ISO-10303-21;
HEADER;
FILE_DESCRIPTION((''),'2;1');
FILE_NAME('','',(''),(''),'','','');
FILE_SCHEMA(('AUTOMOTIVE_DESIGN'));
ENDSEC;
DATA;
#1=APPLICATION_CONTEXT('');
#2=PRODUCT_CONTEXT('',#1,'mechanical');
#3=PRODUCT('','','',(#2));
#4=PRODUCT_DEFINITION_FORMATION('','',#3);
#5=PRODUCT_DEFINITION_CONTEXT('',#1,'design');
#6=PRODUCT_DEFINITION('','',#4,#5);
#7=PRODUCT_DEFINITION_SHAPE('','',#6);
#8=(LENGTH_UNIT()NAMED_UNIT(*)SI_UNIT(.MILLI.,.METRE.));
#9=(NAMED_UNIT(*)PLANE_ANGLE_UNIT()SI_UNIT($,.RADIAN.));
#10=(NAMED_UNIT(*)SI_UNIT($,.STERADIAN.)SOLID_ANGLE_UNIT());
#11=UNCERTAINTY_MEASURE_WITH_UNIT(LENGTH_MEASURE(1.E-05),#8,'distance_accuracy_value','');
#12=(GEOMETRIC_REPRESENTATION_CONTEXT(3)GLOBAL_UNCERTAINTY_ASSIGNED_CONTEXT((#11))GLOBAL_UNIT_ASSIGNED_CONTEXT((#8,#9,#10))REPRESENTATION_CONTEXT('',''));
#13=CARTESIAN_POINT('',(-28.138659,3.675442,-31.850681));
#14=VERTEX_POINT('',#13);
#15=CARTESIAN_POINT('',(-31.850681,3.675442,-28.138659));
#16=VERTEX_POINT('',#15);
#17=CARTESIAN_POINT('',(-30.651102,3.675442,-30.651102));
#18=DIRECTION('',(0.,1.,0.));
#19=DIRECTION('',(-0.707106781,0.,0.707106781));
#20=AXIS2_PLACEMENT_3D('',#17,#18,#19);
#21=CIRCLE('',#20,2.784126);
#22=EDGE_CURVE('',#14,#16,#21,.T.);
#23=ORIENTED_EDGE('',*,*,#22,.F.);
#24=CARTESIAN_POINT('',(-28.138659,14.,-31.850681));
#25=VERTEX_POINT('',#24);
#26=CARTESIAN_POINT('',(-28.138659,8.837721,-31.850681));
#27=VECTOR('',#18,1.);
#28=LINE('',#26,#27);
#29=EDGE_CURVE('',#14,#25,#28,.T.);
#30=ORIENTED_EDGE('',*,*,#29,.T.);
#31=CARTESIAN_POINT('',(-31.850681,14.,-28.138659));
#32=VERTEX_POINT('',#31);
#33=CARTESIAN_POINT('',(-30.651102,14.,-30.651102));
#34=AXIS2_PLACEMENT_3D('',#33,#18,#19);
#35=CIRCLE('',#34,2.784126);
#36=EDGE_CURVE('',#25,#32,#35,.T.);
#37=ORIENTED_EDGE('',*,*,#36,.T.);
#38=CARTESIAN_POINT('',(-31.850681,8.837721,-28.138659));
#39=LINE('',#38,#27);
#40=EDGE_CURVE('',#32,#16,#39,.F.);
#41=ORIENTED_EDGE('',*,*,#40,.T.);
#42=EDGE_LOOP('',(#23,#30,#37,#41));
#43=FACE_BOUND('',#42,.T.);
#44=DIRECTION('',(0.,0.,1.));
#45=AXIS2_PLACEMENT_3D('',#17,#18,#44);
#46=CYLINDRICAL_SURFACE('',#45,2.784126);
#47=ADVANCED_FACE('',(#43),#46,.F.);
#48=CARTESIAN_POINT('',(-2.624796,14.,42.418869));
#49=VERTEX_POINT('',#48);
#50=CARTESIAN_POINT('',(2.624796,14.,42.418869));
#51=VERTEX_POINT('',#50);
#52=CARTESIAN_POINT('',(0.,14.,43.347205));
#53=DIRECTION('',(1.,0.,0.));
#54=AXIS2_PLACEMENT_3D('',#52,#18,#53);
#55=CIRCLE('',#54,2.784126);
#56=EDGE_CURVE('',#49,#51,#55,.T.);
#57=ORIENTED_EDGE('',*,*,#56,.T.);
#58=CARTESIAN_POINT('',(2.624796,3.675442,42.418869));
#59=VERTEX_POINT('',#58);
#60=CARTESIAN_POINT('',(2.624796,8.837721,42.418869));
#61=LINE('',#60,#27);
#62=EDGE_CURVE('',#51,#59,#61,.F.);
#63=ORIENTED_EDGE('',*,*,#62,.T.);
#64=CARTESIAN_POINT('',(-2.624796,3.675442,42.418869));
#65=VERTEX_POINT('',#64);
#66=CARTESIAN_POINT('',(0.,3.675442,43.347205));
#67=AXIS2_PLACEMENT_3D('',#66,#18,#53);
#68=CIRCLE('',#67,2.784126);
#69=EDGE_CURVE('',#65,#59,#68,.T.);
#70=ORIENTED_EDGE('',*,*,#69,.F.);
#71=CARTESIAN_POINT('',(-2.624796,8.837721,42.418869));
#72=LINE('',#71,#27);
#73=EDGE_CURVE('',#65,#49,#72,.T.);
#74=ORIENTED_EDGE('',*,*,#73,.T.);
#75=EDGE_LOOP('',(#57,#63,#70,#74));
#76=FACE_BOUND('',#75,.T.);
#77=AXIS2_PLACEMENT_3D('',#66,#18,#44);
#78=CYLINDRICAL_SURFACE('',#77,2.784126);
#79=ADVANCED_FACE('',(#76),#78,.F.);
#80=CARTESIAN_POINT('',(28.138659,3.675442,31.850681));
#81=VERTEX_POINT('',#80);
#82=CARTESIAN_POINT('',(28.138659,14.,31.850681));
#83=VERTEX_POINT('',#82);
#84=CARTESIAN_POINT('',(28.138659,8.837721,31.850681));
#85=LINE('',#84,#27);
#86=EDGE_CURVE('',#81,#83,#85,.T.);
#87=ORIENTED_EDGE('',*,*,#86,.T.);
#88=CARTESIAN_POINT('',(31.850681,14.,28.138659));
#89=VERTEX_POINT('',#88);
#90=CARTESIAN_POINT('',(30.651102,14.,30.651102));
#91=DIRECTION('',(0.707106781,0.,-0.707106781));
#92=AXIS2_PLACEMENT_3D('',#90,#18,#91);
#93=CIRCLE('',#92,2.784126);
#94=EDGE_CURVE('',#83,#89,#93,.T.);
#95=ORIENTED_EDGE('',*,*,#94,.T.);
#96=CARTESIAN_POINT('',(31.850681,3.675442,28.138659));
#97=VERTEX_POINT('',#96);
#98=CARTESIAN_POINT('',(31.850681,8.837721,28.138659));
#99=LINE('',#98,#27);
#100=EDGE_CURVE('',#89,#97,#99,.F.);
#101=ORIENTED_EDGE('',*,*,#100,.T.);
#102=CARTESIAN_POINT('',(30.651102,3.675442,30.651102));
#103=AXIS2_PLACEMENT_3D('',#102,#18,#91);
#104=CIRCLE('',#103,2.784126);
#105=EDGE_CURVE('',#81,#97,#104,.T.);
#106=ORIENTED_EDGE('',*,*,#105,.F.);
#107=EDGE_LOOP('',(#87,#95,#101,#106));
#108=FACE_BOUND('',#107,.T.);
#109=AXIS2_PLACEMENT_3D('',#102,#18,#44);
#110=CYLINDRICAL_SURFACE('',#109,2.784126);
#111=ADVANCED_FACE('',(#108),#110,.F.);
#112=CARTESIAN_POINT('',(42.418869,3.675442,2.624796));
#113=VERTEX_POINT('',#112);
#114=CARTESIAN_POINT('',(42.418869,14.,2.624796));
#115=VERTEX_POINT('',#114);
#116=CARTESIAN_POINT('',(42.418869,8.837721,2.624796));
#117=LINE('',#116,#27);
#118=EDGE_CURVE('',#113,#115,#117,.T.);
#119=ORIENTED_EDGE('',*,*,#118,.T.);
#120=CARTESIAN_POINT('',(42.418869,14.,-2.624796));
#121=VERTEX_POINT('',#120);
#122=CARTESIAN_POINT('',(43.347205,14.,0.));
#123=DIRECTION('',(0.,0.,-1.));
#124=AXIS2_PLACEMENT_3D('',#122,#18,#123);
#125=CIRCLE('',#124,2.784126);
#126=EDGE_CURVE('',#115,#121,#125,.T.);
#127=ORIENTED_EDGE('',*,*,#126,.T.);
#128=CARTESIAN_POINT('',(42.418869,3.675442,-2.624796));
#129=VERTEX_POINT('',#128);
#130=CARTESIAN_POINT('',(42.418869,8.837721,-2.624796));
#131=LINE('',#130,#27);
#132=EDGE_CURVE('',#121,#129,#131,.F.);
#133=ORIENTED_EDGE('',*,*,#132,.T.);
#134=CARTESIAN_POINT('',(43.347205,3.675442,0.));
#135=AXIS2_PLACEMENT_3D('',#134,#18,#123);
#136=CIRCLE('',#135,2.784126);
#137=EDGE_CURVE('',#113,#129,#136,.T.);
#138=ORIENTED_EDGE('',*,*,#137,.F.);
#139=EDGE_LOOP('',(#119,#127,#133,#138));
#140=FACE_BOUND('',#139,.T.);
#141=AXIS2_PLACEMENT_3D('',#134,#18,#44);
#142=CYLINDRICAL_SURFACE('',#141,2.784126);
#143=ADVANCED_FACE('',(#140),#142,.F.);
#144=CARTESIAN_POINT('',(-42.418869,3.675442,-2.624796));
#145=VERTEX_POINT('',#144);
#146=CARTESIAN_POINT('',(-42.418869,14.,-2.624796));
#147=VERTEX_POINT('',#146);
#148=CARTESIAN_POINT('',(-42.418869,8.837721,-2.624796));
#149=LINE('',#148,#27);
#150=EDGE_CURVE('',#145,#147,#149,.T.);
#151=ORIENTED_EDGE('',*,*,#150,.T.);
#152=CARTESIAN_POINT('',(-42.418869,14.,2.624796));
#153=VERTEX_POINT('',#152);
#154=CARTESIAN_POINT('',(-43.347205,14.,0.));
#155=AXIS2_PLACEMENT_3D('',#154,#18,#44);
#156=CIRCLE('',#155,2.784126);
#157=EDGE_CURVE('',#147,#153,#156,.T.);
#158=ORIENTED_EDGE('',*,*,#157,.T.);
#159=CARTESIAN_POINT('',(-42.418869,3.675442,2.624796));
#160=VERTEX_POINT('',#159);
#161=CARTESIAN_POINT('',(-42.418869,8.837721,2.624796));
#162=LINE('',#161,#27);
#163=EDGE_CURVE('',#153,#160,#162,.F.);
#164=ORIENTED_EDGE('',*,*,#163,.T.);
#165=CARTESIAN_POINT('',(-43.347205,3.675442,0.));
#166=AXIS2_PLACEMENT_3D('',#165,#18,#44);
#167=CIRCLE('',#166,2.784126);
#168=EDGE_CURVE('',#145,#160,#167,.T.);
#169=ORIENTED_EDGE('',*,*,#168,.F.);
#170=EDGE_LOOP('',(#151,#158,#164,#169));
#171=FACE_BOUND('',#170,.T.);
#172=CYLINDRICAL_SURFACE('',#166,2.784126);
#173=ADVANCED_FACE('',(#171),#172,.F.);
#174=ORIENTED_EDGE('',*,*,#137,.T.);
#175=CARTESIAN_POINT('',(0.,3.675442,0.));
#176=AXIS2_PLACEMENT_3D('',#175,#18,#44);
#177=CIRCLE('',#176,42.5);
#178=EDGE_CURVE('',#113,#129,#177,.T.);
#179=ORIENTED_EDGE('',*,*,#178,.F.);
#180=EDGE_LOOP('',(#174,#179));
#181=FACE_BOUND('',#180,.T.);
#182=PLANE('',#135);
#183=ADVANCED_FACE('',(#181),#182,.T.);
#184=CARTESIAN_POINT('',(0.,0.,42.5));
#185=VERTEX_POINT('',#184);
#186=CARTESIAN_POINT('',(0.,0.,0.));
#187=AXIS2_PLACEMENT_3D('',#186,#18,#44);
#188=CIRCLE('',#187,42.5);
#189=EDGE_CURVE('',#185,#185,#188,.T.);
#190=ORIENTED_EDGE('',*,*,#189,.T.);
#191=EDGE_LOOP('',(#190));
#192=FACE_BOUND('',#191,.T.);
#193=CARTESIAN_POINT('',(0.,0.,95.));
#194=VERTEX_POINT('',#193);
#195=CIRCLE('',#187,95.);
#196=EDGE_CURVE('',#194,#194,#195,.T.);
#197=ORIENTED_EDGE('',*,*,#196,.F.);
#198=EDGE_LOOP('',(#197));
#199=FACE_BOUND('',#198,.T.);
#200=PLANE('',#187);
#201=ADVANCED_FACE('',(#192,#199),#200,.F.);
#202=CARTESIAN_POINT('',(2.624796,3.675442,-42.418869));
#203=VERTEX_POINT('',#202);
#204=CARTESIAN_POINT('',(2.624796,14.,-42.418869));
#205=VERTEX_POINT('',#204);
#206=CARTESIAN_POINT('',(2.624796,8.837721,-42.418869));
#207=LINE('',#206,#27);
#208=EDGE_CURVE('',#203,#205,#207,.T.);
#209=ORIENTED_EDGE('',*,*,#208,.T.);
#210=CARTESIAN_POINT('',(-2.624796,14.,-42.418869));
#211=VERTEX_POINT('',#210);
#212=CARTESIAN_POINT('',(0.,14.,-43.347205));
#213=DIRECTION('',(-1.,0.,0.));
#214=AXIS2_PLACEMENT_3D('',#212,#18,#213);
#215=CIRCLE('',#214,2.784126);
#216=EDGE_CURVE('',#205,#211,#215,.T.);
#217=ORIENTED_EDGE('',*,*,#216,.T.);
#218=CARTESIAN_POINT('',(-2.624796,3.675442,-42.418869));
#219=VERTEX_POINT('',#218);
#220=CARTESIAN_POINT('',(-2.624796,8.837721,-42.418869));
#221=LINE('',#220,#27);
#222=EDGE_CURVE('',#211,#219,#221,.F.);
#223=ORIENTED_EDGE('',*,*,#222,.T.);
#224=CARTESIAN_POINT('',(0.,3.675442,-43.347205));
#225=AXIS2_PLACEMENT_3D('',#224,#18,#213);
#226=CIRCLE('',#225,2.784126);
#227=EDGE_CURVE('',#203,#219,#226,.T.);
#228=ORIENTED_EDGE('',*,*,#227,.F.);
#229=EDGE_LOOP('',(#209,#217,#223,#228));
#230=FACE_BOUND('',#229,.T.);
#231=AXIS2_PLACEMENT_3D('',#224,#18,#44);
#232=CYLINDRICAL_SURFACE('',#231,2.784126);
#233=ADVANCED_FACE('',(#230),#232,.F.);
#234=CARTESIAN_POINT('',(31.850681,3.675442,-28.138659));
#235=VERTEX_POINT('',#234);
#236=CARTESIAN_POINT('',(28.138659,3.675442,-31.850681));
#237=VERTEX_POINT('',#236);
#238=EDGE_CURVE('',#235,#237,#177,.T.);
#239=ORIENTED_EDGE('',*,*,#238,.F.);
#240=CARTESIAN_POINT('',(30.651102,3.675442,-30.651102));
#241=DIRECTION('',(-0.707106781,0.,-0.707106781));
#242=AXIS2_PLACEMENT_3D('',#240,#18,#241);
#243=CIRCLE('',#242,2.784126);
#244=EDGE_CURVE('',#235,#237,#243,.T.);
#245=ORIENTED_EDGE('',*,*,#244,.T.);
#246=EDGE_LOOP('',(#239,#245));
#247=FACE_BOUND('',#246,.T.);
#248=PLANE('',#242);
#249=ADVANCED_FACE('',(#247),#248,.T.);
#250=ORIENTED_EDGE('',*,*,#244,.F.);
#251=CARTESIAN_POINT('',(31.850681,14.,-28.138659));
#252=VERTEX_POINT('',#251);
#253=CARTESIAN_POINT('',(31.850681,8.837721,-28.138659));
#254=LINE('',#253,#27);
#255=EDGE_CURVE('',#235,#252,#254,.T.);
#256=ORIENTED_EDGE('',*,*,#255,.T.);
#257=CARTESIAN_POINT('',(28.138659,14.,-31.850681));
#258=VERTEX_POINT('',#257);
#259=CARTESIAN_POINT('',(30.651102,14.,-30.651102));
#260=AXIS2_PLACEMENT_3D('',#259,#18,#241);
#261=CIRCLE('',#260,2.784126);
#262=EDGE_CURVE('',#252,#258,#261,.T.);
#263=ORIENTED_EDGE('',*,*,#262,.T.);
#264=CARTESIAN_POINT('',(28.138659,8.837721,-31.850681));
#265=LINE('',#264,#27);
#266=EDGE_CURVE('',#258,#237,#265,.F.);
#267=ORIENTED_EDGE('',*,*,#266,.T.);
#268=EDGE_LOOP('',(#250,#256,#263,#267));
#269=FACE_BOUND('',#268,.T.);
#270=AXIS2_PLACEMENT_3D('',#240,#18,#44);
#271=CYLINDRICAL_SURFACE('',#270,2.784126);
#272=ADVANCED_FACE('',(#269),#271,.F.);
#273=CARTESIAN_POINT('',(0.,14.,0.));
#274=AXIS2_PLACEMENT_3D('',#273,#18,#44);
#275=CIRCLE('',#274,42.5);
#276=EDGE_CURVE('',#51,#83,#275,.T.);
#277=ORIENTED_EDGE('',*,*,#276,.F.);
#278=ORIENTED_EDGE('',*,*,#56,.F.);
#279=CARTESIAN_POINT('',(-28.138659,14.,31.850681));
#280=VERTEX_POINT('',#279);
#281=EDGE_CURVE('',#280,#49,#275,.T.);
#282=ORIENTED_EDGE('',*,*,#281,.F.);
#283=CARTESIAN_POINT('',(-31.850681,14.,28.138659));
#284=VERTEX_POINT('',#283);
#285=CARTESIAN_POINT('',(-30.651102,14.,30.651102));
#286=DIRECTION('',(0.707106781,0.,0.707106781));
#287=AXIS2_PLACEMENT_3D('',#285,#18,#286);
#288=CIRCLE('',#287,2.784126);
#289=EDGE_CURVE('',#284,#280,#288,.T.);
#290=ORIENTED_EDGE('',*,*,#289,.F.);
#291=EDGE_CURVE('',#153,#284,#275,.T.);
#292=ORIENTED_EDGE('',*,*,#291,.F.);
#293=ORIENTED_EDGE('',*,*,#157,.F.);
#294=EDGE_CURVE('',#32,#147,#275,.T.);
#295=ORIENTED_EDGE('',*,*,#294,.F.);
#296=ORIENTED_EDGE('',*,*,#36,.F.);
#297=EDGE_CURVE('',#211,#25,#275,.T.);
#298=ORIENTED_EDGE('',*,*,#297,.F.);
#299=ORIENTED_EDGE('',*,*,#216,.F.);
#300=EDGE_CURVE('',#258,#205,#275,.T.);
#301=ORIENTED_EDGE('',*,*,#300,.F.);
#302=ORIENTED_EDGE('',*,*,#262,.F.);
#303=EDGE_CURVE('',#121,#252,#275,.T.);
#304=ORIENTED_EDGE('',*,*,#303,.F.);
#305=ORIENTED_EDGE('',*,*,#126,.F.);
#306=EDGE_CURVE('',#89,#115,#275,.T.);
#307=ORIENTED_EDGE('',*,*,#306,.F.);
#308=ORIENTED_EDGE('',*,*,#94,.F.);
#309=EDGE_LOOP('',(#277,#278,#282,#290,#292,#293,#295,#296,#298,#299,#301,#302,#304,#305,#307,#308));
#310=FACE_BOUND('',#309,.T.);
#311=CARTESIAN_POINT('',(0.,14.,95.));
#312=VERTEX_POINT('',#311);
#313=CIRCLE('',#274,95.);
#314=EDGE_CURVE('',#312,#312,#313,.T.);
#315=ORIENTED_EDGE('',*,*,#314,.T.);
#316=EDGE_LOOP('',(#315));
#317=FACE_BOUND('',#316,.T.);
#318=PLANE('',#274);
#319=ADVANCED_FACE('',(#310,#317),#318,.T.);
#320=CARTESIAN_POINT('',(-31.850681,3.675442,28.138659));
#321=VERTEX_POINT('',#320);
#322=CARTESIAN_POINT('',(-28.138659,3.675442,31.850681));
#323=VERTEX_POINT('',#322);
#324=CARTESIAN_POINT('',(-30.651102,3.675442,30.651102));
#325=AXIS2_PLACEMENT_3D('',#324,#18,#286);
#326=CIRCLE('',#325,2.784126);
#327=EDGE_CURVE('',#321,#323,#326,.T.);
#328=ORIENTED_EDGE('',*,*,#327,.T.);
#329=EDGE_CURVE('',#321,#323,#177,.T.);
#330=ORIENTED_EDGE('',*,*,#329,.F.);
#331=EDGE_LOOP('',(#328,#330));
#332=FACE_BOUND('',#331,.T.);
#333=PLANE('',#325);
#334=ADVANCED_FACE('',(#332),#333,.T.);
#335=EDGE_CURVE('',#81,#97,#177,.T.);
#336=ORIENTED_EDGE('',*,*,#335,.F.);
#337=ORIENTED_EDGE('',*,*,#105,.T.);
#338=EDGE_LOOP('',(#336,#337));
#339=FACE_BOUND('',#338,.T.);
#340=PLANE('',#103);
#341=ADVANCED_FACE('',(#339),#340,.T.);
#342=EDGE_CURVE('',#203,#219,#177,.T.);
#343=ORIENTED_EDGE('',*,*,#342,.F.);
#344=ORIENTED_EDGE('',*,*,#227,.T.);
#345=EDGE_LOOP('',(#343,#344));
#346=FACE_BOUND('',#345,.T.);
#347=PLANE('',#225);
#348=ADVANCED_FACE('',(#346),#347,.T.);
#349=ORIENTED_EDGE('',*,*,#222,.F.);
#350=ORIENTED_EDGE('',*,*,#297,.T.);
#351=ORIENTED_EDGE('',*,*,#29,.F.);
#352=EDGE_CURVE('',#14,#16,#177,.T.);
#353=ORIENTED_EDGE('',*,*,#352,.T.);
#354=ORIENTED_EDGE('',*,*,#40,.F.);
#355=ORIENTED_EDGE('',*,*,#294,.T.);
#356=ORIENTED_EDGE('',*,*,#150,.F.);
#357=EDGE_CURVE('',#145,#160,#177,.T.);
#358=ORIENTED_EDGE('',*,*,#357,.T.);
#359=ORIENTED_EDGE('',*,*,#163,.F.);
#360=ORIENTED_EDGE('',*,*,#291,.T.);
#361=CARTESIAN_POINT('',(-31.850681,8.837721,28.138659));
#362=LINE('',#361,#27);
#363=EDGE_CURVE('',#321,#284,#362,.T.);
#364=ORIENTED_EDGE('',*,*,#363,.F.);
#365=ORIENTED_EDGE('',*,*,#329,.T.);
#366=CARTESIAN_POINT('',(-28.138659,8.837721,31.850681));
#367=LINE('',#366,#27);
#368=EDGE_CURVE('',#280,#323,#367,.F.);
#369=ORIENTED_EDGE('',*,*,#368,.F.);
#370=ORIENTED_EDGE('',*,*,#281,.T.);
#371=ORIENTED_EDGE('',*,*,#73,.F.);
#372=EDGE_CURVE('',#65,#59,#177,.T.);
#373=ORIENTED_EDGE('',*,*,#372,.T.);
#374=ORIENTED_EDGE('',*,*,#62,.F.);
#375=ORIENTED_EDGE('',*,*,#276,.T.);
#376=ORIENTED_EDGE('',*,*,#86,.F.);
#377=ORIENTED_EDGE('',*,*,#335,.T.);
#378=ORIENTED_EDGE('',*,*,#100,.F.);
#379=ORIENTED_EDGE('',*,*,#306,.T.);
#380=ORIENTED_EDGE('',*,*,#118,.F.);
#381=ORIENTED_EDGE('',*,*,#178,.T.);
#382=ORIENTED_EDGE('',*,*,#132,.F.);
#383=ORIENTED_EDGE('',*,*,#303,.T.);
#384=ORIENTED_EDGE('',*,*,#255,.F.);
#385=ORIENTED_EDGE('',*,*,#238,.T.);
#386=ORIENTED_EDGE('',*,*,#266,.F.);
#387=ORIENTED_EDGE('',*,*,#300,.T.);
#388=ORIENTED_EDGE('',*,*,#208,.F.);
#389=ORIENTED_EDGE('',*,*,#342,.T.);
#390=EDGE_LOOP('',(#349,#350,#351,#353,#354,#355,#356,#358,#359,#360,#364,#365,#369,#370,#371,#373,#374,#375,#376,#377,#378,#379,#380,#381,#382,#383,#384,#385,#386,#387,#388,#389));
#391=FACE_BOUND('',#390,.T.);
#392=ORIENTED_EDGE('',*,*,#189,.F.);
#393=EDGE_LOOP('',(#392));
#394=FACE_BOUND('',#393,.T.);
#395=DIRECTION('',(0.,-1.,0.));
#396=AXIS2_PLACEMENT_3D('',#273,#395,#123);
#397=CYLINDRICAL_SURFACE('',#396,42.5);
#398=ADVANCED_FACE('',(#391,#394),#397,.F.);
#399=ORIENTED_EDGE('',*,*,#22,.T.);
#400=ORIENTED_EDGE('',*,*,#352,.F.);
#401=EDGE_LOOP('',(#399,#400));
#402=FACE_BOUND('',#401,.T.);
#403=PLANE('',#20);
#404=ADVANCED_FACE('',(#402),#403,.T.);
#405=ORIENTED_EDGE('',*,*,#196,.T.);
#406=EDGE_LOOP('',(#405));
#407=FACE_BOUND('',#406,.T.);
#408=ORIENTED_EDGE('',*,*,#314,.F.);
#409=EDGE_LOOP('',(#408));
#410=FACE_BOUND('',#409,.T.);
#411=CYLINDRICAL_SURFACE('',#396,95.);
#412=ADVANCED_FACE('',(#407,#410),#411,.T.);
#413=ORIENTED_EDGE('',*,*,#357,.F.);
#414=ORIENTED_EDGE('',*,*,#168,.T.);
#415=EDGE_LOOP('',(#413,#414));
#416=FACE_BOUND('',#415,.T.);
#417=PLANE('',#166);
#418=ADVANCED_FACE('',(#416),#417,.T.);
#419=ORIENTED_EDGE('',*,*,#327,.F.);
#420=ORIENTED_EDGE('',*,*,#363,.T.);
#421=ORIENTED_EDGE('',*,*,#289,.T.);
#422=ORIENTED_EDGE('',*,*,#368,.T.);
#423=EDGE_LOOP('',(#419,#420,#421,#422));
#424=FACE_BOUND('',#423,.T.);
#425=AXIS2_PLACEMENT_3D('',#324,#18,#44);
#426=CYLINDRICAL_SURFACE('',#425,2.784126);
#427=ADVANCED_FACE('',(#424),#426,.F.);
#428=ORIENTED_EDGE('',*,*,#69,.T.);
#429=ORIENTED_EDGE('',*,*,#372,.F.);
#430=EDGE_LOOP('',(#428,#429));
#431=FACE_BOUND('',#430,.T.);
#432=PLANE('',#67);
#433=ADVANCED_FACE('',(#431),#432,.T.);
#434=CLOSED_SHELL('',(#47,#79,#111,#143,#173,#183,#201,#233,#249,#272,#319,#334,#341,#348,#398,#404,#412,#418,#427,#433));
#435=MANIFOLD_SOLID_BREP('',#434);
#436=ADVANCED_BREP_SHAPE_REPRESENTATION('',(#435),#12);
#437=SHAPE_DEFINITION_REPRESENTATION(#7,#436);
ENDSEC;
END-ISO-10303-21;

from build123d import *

# Parameters (mm, degrees)
SKETCH1_R           = 95
BOSS_EXTRUDE1_DEPTH = 14
SKETCH2_R           = 42.5
CUT_EXTRUDE1_DEPTH  = 136.077755386
SKETCH3_R           = 2.78412642
CUT_EXTRUDE2_DEPTH  = 10.324557631
CIRPATTERN1_COUNT   = 8


with BuildPart() as part:
    # Sketch1 → Boss-Extrude1 (new body)
    with BuildSketch(Plane(origin=(0, 0, 0), x_dir=(1, 0, 0), z_dir=(0, 1, 0))):
        Circle(SKETCH1_R)
    extrude(amount=BOSS_EXTRUDE1_DEPTH)

    # Sketch2 → Cut-Extrude1 (cut, through all)
    with BuildSketch(Plane(origin=(0, 0, 0), x_dir=(1, 0, 0), z_dir=(0, 1, 0))):
        Circle(SKETCH2_R)
    extrude(amount=CUT_EXTRUDE1_DEPTH, mode=Mode.SUBTRACT)

    # Sketch3 → Cut-Extrude2 (cut)
    with BuildSketch(Plane(origin=(0, 14, 0), x_dir=(1, 0, 0), z_dir=(0, 1, 0))):
        with Locations((-43.3472045, 0)):
            Circle(SKETCH3_R)
    cut_extrude2 = extrude(amount=-CUT_EXTRUDE2_DEPTH, mode=Mode.SUBTRACT)

    # CirPattern1: Cut-Extrude2 ×8 about axis
    cirpattern1_axis = Axis((0, 0, 0), (0, 1, 0))
    for i in range(1, CIRPATTERN1_COUNT):
        add(cut_extrude2.rotate(cirpattern1_axis, i * 360 / CIRPATTERN1_COUNT), mode=Mode.SUBTRACT)


solid = part.part
